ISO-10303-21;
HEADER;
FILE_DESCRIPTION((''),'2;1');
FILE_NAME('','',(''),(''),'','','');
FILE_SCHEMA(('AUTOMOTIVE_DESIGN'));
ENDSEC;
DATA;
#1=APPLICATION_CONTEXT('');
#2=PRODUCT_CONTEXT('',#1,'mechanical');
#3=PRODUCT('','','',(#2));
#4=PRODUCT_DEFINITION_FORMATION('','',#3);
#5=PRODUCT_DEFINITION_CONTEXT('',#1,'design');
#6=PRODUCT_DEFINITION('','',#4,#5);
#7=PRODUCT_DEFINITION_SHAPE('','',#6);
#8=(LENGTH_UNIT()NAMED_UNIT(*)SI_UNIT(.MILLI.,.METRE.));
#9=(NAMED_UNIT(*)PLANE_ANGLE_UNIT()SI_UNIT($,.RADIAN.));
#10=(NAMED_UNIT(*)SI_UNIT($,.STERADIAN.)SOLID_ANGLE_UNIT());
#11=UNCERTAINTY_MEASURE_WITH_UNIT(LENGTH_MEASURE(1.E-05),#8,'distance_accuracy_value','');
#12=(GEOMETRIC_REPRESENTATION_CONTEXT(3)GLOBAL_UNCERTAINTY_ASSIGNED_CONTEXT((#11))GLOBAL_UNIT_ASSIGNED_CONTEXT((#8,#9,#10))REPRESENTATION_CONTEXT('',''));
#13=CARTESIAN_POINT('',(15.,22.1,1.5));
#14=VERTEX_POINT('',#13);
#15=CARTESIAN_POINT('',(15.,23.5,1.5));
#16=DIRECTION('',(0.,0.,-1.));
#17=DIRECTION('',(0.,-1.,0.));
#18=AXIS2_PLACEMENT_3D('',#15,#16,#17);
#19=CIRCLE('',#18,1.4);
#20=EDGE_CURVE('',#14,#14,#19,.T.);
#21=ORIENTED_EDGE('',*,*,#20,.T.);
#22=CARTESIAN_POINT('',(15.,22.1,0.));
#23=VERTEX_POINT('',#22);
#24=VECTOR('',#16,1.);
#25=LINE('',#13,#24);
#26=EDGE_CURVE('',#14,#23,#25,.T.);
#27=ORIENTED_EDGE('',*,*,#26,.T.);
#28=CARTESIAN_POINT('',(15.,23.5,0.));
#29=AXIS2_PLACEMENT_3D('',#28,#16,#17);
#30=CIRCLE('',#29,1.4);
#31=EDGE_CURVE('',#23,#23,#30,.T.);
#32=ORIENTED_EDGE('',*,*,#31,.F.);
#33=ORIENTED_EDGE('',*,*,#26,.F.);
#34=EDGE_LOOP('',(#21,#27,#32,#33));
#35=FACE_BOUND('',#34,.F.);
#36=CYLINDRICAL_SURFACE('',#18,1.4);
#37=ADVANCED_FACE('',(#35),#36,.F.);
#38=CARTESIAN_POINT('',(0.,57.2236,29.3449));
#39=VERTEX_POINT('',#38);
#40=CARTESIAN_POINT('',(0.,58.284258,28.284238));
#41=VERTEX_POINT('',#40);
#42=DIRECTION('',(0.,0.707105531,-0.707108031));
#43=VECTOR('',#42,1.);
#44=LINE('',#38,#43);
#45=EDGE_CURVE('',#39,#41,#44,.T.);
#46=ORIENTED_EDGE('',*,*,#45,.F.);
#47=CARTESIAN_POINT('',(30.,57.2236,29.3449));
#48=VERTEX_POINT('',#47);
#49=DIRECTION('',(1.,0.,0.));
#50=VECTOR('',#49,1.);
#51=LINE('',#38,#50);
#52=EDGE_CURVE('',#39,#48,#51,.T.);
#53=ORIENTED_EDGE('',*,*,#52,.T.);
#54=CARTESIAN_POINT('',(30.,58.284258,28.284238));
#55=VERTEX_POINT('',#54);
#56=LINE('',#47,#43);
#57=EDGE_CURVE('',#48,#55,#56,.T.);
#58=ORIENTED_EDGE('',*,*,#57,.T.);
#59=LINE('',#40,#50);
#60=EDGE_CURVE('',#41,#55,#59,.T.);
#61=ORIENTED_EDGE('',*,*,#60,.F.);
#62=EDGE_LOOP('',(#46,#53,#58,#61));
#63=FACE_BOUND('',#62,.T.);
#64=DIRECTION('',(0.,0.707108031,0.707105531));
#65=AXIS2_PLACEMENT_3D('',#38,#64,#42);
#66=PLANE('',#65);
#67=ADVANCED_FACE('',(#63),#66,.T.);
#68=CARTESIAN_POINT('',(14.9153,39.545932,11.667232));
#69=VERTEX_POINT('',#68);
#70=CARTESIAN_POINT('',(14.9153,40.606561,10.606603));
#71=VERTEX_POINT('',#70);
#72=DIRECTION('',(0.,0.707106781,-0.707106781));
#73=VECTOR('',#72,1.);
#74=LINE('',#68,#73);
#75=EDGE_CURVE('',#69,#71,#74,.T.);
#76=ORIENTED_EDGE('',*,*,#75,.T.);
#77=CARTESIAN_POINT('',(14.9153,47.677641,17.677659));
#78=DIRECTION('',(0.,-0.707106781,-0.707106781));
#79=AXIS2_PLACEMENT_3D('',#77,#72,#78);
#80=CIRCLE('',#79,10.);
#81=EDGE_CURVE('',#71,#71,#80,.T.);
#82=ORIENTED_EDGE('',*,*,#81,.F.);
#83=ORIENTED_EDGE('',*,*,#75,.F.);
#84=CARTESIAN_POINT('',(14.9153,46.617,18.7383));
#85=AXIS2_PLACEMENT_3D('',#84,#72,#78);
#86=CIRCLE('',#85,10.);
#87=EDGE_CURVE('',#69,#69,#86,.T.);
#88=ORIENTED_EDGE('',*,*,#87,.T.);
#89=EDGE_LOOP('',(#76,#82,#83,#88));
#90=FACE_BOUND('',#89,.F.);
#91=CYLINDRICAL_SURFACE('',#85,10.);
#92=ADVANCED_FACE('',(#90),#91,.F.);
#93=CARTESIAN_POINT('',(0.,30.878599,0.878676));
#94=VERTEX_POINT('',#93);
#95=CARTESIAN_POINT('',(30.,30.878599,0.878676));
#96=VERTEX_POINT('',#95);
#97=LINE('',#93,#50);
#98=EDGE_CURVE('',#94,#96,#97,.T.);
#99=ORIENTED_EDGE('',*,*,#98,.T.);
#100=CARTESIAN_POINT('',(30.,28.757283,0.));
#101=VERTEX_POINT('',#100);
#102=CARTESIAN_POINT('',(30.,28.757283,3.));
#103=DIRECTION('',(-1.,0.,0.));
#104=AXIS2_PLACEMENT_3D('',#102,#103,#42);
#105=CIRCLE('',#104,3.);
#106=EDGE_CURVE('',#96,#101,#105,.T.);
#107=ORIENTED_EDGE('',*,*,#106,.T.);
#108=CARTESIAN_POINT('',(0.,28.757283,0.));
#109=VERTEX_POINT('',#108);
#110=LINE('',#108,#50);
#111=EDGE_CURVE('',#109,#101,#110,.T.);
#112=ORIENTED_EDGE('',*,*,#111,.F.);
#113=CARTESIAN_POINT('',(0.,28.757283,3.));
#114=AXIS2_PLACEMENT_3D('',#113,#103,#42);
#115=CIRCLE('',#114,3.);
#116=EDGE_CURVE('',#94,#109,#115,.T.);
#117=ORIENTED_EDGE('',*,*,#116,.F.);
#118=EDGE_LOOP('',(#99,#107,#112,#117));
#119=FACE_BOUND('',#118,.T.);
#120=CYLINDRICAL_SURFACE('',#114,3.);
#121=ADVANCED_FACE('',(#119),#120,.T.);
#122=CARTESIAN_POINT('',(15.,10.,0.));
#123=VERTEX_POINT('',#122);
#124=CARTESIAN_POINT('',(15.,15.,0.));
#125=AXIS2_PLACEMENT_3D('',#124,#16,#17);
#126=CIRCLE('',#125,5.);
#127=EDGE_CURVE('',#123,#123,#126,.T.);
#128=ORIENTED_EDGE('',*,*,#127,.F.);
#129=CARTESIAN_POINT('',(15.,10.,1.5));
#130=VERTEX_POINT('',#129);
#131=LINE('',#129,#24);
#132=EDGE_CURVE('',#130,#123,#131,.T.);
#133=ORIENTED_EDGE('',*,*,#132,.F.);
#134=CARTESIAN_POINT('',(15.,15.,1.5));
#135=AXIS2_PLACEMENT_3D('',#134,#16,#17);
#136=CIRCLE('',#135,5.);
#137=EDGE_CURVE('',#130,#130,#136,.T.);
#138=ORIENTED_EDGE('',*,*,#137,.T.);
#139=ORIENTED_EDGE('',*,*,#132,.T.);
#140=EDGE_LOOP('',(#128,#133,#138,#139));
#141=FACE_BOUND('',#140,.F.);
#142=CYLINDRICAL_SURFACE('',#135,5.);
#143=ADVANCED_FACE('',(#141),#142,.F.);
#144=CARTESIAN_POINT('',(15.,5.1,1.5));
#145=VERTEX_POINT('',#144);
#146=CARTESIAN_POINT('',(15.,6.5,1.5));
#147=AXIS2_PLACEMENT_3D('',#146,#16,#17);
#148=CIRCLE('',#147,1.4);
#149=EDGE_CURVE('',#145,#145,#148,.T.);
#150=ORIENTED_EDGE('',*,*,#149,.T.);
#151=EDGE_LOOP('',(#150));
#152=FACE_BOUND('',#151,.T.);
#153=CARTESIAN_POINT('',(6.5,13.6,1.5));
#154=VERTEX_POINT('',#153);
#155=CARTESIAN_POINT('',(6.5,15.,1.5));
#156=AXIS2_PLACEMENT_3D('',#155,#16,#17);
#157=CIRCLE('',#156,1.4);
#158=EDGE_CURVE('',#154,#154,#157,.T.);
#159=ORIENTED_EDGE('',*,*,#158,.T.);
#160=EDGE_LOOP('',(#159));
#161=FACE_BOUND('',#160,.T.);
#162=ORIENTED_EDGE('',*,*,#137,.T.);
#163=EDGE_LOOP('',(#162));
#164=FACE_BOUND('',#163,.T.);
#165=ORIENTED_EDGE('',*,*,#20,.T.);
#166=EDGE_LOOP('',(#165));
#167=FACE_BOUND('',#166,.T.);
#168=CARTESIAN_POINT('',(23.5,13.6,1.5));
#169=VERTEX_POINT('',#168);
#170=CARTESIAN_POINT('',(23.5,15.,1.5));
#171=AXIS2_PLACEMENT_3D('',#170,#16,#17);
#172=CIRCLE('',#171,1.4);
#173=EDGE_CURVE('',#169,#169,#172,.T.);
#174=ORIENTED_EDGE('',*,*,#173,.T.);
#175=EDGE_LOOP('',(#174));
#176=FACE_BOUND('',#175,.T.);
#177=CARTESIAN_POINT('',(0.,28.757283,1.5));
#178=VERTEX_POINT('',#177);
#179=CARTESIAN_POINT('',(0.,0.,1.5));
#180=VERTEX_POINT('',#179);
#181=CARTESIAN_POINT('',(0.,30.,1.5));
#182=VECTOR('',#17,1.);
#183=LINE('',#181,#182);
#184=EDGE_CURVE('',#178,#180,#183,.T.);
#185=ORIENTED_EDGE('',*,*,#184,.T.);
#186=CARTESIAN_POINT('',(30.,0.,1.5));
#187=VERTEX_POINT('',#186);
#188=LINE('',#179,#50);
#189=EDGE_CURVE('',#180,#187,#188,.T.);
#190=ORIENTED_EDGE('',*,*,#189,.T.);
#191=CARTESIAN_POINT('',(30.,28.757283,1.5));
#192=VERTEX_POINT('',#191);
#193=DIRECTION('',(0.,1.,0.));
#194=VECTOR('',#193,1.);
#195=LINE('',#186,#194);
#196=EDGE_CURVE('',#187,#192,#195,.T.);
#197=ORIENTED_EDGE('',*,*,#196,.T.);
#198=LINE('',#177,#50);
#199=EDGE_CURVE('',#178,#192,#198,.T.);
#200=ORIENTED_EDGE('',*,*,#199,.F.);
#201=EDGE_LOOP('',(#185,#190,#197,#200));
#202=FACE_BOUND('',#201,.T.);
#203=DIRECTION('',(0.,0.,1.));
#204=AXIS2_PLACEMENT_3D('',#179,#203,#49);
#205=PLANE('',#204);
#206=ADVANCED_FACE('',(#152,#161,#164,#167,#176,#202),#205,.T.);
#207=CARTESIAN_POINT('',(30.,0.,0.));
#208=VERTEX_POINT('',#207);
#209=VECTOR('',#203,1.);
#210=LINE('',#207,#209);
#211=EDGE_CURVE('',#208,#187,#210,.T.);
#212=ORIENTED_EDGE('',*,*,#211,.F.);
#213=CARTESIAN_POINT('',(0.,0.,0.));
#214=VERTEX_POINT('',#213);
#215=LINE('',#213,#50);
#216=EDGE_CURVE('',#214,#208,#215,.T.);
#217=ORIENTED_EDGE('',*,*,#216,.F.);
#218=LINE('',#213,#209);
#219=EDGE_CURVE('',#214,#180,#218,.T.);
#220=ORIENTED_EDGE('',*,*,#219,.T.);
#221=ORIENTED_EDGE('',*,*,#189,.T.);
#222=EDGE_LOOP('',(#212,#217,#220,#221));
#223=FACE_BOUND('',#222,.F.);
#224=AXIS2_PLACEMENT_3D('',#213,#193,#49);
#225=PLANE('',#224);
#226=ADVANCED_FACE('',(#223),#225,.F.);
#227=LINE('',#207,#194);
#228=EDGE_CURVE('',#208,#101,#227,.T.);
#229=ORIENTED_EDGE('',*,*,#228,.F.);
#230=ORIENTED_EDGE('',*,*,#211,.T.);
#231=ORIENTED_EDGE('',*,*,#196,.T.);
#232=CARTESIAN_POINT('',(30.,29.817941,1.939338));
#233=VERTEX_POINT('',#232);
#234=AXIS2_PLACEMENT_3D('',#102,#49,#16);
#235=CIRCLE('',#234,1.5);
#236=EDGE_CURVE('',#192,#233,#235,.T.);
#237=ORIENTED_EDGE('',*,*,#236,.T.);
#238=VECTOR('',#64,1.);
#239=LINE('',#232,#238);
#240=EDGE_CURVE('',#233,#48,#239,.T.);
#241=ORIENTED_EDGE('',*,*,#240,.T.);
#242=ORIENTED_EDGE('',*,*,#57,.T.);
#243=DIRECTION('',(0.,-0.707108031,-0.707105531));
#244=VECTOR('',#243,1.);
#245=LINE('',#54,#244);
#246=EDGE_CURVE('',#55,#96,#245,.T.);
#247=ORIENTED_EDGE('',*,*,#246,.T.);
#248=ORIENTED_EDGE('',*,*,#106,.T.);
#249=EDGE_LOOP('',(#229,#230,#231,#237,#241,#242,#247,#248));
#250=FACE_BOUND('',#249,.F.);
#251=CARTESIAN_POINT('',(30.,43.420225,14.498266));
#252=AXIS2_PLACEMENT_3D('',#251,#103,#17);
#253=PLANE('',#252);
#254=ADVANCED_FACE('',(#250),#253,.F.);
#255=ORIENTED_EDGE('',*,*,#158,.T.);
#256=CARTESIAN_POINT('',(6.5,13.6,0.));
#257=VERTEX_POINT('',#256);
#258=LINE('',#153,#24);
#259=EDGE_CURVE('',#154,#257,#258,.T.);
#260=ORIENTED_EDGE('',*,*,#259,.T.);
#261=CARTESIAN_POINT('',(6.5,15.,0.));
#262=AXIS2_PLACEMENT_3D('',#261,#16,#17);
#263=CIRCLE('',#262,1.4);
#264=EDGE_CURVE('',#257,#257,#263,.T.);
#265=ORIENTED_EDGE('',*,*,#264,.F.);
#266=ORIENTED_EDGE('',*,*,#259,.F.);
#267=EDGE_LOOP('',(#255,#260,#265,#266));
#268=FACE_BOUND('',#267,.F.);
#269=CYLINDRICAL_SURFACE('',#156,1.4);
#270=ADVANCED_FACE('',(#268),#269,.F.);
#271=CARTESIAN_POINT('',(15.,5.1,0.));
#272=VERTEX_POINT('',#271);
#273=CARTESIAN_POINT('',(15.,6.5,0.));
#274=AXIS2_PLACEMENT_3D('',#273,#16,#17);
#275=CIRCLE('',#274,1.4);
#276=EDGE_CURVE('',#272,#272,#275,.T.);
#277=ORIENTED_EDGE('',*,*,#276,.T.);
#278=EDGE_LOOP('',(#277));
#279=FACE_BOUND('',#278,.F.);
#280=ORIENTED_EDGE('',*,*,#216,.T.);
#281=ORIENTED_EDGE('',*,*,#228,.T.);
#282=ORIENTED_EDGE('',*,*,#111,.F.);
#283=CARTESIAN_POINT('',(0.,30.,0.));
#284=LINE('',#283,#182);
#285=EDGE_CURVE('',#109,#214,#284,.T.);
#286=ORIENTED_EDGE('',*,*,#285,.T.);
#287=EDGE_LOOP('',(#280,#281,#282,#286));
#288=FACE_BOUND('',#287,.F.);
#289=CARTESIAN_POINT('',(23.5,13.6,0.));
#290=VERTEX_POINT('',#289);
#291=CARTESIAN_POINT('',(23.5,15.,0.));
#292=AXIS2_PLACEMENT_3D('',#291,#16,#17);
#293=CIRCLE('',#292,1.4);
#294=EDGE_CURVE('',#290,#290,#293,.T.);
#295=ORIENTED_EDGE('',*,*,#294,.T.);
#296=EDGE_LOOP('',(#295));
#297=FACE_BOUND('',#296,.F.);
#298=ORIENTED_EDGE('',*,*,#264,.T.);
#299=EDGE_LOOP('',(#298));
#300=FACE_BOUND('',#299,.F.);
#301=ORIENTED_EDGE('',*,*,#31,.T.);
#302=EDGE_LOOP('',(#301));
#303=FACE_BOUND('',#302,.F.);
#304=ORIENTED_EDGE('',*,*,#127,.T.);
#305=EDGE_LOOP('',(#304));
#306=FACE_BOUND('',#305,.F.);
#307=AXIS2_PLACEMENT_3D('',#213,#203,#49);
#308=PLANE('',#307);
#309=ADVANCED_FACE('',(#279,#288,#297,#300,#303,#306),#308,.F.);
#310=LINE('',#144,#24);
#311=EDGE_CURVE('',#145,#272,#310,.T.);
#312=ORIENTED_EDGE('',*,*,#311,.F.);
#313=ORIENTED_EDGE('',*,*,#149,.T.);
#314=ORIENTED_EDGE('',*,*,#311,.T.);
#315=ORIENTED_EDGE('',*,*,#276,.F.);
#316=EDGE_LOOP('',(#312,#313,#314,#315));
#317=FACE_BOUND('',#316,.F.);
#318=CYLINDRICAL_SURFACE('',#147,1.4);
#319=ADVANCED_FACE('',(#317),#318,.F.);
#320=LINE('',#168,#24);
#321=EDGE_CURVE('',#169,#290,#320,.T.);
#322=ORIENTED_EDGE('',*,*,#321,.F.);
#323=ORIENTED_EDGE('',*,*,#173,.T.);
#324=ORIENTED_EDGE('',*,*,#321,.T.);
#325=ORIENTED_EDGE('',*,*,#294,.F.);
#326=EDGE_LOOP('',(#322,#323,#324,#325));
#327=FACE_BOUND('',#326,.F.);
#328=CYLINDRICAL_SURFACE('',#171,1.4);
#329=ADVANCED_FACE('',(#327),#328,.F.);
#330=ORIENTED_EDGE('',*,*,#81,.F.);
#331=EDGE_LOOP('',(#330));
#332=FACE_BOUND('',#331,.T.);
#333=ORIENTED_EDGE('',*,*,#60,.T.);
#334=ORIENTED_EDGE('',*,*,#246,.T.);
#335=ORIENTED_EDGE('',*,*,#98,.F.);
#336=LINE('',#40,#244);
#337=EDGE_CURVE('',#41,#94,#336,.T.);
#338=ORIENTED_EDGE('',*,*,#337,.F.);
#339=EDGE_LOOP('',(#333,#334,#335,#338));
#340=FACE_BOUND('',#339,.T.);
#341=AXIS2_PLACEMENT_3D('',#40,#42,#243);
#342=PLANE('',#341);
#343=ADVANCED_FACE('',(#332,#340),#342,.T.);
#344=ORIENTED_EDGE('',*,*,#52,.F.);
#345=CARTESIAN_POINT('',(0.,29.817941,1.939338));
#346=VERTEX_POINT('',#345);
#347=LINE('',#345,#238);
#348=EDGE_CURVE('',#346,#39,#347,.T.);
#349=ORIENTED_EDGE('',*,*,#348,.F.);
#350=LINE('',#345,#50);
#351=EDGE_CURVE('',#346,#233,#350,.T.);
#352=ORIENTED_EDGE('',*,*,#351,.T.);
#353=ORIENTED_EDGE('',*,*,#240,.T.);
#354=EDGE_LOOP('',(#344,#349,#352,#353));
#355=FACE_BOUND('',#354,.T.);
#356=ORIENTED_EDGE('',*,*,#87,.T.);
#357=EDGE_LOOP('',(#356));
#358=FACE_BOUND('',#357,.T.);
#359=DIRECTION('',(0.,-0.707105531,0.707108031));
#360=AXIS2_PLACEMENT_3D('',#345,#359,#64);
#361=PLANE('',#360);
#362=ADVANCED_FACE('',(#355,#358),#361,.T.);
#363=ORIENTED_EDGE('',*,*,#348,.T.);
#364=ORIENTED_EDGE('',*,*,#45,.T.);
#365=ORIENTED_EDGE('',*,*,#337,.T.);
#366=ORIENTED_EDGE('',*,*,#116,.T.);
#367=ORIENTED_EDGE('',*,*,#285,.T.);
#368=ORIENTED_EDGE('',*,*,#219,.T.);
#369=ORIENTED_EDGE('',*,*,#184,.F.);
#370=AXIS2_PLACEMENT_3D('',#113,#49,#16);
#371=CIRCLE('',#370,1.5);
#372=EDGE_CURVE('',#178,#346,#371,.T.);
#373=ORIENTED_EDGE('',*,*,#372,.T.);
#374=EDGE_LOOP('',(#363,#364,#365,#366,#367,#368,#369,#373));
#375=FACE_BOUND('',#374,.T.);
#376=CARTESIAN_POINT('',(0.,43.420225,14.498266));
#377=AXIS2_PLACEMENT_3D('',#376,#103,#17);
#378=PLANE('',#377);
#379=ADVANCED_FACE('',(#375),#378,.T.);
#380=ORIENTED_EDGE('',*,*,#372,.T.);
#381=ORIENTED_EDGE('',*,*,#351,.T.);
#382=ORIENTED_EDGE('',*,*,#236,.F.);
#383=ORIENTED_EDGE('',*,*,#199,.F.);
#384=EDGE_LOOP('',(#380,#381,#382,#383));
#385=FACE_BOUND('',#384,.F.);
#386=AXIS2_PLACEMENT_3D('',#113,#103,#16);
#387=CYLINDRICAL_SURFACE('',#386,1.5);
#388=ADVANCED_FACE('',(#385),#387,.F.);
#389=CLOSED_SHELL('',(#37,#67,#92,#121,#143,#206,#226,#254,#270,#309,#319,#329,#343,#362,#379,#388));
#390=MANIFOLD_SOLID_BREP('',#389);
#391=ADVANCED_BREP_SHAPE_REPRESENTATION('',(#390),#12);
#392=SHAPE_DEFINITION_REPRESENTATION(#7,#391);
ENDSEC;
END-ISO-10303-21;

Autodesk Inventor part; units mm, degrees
ref_plane "YZ Plane" through (0, 0, 0) normal (1, 0, 0) x (0, 1, 0)
ref_plane "XZ Plane" through (0, 0, 0) normal (0, 1, 0) x (-1, 0, 0)
ref_plane "XY Plane" through (0, 0, 0) normal (0, 0, 1) x (1, 0, 0)
sketch "スケッチ2" plane through (0, 0, 0) normal (0, 0, 1) x (1, 0, 0)
  line L0 (0, 0) -> (30, 0)
  line L1 (30, 0) -> (30, 30)
  line L2 (30, 30) -> (0, 30)
  line L3 (0, 30) -> (0, 0)
  dimension "d0" = 30
  dimension "d1" = 30
extrude "プレート1" add sketch "スケッチ2" along normal blind 1.5
sketch "スケッチ5" plane through (0, 28.9393, 1.0607) normal (0, 0.7071068, -0.7071068) x (-1, 0, 0)
  line L0 (-30, 0) -> (0, 0)
  line L1 (0, 0) -> (0, 40)
  line L2 (0, 40) -> (-30, 40)
  line L3 (-30, 40) -> (-30, 0)
edge flange "フランジ1" height 40 angle 45 thickness 1.5 bend radius 1.5 thickness toward (0, 0.7071068, -0.7071068) relief tear relief width 1.5 relief depth 0.75 edges at (15, 30, 1.5) wall of the first edge with corners at (30, 28.9393, 1.0607) (0, 28.9393, 1.0607) (0, 57.2236, 29.3449) (30, 57.2236, 29.3449)
bend "曲げ1"
corner "コーナー1"
sketch "スケッチ6" plane through (0, 0, 1.5) normal (0, 0, 1) x (1, 0, 0)
  line L0 (30, 0) -> (0, 0) projected
  line L1 (15, 0) -> (15, 28.7574) construction
  line L2 (30, 28.7574) -> (0, 28.7574) projected
  line L3 (0, 0) -> (0, 28.7574) projected
  line L4 (0, 15) -> (30, 15) construction
  point P0 (15, 15)
  dimension "d34" = 15
hole "穴3" at (15, 15, 1.5) direction (0, 0, -1) diameter 10 end through all
sketch "スケッチ7" plane through (0, 0, 1.5) normal (0, 0, 1) x (1, 0, 0)
  circle A0 centre (15, 15) radius 5 projected
  line L0 (30, 28.7574) -> (0, 28.7574) projected
  line L1 (0, 0) -> (0, 28.7574) projected
  line L2 (30, 0) -> (0, 0) projected
  line L3 (30, 28.7574) -> (30, 0) projected
  line L4 (15, 15) -> (30, 15) construction
  line L5 (30, 0) -> (30, 28.7574) projected
  line L6 (15, 15) -> (15, 30) construction
  line L7 (15, 15) -> (0, 15) construction
  line L8 (15, 15) -> (15, 0) construction
  point P0 (23.5, 15)
  point P1 (15, 23.5)
  point P2 (6.5, 15)
  point P3 (15, 6.5)
  dimension "d42" = 8.5
  dimension "d45" = 360
hole "穴4" at (23.5, 15, 1.5) at (15, 23.5, 1.5) at (6.5, 15, 1.5) at (15, 6.5, 1.5) direction (0, 0, -1) diameter 2.8 end through all
sketch "スケッチ8" plane through (0, 57.2236, 29.3449) normal (0, -0.7071068, 0.7071068) x (1, 0, 0)
  line L0 (30, 0) -> (0, 0) projected
  line L1 (15, 0) -> (15, -38.7574) construction
  line L2 (0, -38.7574) -> (30, -38.7574) projected
  line L3 (0, -38.7574) -> (0, 0) projected
  line L4 (0, -15) -> (29.8306, -15) construction
  point P0 (0, -61.2132)
  point P1 (14.9153, -15)
  dimension "d54" = 15
hole "穴5" at (14.9153, 46.617, 18.7383) direction (0, 0.7071068, -0.7071068) diameter 20 end through all
equation "\"d23\" = Thickness"
equation "\"d24\" = BendReliefWidth"
equation "\"d25\" = BendReliefDepth"
equation "\"d26\" = MinimumRemnant"
equation "\"d27\" = TransitionRadius"
equation "\"d30\" = BendRadius"
equation "\"d31\" = CornerReliefSize"
equation "\"d32\" = GapSize"
equation "\"d33\" = JacobiRadiusSize"
equation "\"BendRadius\" = Thickness"
equation "\"BendReliefWidth\" = Thickness"
equation "\"BendReliefDepth\" = 0.5 * Thickness"
equation "\"CornerReliefSize\" = 4 * Thickness"
equation "\"MinimumRemnant\" = 2 * Thickness"
equation "\"TransitionRadius\" = BendRadius"
equation "\"JacobiRadiusSize\" = BendRadius"
equation "\"GapSize\" = Thickness"
equation "\"Thickness\" = 1.5"
properties part number "head"
